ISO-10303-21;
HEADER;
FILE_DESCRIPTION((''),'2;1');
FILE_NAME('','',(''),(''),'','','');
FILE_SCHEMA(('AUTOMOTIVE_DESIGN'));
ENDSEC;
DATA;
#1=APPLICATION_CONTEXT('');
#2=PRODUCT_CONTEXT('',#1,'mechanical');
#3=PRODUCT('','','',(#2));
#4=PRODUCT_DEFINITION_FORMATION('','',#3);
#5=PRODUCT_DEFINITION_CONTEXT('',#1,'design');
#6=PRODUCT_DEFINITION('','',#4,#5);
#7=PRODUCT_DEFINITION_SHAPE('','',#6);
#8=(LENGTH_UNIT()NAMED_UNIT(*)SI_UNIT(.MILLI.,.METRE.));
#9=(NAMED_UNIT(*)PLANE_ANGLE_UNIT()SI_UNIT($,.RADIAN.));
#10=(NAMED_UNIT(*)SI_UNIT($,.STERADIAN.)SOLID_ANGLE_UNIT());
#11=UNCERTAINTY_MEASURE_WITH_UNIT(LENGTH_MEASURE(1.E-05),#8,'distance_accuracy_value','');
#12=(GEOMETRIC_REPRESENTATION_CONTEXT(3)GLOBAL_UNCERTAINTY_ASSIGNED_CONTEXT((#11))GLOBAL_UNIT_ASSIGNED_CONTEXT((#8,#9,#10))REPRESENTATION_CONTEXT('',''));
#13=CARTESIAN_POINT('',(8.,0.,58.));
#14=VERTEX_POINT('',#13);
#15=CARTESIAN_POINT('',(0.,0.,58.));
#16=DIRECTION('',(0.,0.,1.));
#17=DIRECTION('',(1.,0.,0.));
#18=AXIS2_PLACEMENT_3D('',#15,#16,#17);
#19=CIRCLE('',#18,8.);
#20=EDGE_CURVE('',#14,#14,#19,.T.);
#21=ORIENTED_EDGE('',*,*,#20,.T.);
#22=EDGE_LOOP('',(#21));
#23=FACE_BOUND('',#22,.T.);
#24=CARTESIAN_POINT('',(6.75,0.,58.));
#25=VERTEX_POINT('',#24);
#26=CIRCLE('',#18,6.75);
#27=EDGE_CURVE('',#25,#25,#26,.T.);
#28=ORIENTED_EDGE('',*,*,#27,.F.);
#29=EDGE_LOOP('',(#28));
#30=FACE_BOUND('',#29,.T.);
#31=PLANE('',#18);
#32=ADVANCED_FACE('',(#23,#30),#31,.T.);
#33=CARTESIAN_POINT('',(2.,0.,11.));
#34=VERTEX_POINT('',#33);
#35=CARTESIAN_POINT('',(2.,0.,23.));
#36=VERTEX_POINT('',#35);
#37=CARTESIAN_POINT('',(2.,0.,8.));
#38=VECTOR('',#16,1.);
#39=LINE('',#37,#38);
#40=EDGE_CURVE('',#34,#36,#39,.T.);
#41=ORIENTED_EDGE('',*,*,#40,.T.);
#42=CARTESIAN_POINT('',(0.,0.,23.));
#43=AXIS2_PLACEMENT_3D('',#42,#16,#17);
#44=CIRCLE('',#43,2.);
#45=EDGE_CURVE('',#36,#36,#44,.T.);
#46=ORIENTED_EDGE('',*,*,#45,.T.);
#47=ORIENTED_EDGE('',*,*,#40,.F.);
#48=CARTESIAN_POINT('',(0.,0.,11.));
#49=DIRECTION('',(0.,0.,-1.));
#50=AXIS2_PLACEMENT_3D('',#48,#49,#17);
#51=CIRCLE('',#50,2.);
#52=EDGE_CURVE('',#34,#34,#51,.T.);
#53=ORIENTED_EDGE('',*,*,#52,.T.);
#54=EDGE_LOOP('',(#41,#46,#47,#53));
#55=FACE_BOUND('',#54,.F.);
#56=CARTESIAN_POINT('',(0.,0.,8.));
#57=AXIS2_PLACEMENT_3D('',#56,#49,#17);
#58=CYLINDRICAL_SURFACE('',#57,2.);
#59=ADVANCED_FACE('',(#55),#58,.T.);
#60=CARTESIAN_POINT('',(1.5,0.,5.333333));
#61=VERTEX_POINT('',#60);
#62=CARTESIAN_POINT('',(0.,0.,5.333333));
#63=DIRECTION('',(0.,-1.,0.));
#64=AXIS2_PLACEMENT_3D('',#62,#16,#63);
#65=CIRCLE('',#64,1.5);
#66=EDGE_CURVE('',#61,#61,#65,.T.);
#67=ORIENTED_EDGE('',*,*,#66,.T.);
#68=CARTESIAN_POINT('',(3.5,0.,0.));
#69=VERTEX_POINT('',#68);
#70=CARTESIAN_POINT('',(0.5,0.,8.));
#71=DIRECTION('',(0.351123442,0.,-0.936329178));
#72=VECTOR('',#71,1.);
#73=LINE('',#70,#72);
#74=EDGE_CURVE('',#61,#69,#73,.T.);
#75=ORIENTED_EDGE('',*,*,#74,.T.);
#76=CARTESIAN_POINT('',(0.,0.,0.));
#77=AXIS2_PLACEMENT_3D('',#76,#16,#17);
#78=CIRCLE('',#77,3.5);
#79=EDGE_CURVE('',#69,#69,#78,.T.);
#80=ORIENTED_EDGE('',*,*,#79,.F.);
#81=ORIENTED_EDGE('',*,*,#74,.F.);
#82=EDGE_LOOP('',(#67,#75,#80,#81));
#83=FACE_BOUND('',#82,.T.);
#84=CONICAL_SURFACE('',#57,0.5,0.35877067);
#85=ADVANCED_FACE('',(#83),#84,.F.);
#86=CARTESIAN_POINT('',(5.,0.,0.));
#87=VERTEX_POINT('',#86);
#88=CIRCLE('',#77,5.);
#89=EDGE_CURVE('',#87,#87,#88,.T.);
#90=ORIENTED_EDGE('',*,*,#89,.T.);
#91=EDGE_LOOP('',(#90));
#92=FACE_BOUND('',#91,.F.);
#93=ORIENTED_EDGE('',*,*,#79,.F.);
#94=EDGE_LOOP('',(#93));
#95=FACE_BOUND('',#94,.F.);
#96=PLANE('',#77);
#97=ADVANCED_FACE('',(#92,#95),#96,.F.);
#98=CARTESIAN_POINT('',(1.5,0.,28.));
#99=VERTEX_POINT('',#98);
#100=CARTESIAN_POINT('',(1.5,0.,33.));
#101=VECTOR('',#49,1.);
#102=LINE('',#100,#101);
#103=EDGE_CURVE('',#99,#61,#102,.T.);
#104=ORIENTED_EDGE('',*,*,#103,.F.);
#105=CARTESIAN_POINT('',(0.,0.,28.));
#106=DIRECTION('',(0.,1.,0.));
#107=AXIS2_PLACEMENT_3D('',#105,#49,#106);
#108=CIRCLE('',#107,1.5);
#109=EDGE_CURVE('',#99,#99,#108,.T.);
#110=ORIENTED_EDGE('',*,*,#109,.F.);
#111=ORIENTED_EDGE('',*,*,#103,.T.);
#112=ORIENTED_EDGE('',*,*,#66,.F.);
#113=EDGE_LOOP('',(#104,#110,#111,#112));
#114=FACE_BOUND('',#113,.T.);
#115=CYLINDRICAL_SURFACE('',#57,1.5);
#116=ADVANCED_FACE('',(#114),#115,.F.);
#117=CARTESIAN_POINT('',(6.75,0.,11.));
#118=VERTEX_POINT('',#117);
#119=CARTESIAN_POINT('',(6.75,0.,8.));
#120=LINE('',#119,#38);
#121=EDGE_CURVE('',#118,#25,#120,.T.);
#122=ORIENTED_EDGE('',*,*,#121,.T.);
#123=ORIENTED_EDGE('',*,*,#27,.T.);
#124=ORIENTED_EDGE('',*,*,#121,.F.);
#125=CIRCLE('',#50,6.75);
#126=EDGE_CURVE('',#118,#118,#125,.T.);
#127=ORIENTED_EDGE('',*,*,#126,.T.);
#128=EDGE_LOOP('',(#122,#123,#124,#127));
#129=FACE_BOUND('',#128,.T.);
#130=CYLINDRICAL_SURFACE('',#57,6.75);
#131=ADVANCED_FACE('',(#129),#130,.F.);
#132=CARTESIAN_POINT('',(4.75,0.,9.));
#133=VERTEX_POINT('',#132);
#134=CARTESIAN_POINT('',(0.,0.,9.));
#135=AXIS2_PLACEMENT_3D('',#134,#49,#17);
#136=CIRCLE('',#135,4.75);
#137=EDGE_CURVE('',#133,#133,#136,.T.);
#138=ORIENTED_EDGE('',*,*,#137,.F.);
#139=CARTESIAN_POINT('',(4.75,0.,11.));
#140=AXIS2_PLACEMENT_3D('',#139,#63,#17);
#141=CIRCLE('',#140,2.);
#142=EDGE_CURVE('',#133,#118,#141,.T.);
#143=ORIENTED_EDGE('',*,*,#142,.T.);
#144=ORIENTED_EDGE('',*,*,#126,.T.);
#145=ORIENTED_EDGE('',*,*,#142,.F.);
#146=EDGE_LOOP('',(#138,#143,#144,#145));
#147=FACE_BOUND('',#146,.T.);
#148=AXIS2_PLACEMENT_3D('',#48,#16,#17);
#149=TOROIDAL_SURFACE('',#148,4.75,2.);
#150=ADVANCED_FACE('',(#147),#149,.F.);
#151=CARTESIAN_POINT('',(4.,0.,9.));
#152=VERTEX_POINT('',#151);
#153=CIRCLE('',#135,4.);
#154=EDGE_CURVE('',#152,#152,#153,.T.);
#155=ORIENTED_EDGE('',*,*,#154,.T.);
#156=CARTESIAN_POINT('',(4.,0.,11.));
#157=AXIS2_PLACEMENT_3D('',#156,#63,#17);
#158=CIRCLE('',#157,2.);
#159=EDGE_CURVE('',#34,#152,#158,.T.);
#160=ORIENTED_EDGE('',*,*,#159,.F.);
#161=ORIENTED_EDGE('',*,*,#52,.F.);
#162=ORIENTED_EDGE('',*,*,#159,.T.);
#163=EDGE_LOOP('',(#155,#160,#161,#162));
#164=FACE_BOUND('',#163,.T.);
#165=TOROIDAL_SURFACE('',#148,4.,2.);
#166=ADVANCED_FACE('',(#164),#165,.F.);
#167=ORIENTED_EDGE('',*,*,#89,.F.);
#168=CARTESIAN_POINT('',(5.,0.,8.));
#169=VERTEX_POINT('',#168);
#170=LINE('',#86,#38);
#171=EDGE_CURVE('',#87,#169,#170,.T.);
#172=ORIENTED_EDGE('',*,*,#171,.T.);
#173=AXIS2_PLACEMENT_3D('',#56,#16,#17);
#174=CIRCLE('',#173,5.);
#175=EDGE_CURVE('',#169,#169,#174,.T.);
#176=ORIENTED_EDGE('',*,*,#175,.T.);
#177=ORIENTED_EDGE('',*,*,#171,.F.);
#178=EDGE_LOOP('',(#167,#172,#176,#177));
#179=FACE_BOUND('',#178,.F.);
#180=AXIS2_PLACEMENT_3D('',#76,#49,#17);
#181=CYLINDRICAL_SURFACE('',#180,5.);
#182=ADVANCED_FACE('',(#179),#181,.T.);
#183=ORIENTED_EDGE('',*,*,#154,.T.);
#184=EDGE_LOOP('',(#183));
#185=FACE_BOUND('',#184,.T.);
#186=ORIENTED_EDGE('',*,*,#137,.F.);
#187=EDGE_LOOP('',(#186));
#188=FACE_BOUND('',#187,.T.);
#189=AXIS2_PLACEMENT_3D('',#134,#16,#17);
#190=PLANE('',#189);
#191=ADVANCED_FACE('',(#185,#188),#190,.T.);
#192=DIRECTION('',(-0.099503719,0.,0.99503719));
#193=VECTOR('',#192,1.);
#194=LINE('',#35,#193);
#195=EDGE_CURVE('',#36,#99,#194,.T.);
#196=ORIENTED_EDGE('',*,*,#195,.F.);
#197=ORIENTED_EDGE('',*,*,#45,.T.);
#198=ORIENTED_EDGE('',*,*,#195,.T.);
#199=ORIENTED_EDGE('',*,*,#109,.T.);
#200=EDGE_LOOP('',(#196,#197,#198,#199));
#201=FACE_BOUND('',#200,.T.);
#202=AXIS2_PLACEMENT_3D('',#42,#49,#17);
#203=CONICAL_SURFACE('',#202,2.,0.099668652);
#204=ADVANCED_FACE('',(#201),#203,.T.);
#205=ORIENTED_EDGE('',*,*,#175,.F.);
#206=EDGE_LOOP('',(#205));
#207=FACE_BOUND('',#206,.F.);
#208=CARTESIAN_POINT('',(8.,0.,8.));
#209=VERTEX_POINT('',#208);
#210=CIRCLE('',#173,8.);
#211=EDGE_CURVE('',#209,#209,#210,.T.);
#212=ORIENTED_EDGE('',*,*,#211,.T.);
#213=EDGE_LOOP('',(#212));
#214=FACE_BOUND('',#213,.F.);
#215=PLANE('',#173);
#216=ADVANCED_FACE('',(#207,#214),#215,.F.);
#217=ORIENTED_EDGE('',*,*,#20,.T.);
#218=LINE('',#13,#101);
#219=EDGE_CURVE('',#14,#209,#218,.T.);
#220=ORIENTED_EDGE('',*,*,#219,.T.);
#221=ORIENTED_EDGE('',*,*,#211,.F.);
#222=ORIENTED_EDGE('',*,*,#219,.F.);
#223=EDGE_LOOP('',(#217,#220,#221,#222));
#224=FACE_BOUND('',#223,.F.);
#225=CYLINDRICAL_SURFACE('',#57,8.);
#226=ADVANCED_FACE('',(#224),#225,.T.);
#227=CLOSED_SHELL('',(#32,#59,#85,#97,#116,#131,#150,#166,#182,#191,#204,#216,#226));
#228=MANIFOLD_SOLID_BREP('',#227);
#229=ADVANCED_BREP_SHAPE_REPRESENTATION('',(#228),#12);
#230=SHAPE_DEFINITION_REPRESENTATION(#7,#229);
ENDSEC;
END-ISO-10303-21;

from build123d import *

# Parameters (mm, degrees)
F0_R        = 5
F0_R_2      = 3.5
F1_DEPTH    = 8
F2_R        = 8
F2_R_2      = 6.75
F2_R_3      = 5
F2_R_4      = 3.5
F2_R_5      = 2
F2_R_6      = 1.5
F3_DEPTH    = 1
F4_DEPTH    = 50
F5_DEPTH    = 25
F6_S5_R     = 1.5
F6_T6_DEPTH = 8
F7_R        = 2
F9_R        = 2


# Not quite as in the source:
# - a fillet or chamfer that OpenCascade refuses, or shapes differently, is made with other operations: its cross-section is extruded or revolved along the edge and cut away or added


with BuildPart() as f1:
    # F0 (on Top) → F1 (new body)
    with BuildSketch(Plane.XY):
        Circle(F0_R)
        Circle(F0_R_2, mode=Mode.SUBTRACT)
    extrude(amount=F1_DEPTH)

    # F2 (on face) → F3 (join)
    with BuildSketch(Plane.XY.offset(8)):
        Circle(F2_R)
        Circle(F2_R_2, mode=Mode.SUBTRACT)
        Circle(F2_R_2)
        Circle(F2_R_3, mode=Mode.SUBTRACT)
        Circle(F2_R_3)
        Circle(F2_R_4, mode=Mode.SUBTRACT)
        Circle(F2_R_4)
        Circle(F2_R_5, mode=Mode.SUBTRACT)
        Circle(F2_R_5)
        Circle(F2_R_6, mode=Mode.SUBTRACT)
    extrude(amount=F3_DEPTH)

    # F2 (on face) → F4 (join)
    with BuildSketch(Plane.XY.offset(8)):
        Circle(F2_R)
        Circle(F2_R_2, mode=Mode.SUBTRACT)
    extrude(amount=F4_DEPTH)

    # F2 (on face) → F5 (join)
    with BuildSketch(Plane.XY.offset(8)):
        Circle(F2_R_5)
        Circle(F2_R_6, mode=Mode.SUBTRACT)
    extrude(amount=F5_DEPTH)

    # F6: chamfer of 8 x 3 on 1 edges, made by hand


with BuildPart() as f6_tool2:
    # F6_s3 → F6_t4 (revolve)
    with BuildSketch(Plane.XZ):
        Polygon((0.5, 8), (3.5, 0), (3.5, 8), align=None)
    revolve(axis=Axis((0, 0, 8), (0, 0, 1)))

    # F6_s5 → F6_t6 (cut, symmetric)
    with BuildSketch(Plane.XY.offset(4)):
        Circle(F6_S5_R)
    extrude(amount=F6_T6_DEPTH, both=True, mode=Mode.SUBTRACT)

    split(bisect_by=Plane.XY, keep=Keep.TOP)


with BuildPart() as f1_1:
    add(f1.part)

    # F6_t1: union F6_tool2
    add(f6_tool2.part)

    # F7
    f7_edges = [f1_1.edges().sort_by_distance(p)[0] for p in [
        (-2, 0, 9),
    ]]
    fillet(f7_edges, radius=F7_R)

    # F8: chamfer of 1 x 10 on 1 edges, made by hand

    # F8_s1 → F8_t2 (revolve, cut)
    with BuildSketch(Plane.XZ):
        Polygon((2, 23), (1, 33), (2, 33), align=None)
    revolve(axis=Axis((0, 0, 33), (0, 0, 1)), mode=Mode.SUBTRACT)

    # F9
    f9_edges = [f1_1.edges().sort_by_distance(p)[0] for p in [
        (-6.75, 0, 9),
    ]]
    fillet(f9_edges, radius=F9_R)


solid = f1_1.part
